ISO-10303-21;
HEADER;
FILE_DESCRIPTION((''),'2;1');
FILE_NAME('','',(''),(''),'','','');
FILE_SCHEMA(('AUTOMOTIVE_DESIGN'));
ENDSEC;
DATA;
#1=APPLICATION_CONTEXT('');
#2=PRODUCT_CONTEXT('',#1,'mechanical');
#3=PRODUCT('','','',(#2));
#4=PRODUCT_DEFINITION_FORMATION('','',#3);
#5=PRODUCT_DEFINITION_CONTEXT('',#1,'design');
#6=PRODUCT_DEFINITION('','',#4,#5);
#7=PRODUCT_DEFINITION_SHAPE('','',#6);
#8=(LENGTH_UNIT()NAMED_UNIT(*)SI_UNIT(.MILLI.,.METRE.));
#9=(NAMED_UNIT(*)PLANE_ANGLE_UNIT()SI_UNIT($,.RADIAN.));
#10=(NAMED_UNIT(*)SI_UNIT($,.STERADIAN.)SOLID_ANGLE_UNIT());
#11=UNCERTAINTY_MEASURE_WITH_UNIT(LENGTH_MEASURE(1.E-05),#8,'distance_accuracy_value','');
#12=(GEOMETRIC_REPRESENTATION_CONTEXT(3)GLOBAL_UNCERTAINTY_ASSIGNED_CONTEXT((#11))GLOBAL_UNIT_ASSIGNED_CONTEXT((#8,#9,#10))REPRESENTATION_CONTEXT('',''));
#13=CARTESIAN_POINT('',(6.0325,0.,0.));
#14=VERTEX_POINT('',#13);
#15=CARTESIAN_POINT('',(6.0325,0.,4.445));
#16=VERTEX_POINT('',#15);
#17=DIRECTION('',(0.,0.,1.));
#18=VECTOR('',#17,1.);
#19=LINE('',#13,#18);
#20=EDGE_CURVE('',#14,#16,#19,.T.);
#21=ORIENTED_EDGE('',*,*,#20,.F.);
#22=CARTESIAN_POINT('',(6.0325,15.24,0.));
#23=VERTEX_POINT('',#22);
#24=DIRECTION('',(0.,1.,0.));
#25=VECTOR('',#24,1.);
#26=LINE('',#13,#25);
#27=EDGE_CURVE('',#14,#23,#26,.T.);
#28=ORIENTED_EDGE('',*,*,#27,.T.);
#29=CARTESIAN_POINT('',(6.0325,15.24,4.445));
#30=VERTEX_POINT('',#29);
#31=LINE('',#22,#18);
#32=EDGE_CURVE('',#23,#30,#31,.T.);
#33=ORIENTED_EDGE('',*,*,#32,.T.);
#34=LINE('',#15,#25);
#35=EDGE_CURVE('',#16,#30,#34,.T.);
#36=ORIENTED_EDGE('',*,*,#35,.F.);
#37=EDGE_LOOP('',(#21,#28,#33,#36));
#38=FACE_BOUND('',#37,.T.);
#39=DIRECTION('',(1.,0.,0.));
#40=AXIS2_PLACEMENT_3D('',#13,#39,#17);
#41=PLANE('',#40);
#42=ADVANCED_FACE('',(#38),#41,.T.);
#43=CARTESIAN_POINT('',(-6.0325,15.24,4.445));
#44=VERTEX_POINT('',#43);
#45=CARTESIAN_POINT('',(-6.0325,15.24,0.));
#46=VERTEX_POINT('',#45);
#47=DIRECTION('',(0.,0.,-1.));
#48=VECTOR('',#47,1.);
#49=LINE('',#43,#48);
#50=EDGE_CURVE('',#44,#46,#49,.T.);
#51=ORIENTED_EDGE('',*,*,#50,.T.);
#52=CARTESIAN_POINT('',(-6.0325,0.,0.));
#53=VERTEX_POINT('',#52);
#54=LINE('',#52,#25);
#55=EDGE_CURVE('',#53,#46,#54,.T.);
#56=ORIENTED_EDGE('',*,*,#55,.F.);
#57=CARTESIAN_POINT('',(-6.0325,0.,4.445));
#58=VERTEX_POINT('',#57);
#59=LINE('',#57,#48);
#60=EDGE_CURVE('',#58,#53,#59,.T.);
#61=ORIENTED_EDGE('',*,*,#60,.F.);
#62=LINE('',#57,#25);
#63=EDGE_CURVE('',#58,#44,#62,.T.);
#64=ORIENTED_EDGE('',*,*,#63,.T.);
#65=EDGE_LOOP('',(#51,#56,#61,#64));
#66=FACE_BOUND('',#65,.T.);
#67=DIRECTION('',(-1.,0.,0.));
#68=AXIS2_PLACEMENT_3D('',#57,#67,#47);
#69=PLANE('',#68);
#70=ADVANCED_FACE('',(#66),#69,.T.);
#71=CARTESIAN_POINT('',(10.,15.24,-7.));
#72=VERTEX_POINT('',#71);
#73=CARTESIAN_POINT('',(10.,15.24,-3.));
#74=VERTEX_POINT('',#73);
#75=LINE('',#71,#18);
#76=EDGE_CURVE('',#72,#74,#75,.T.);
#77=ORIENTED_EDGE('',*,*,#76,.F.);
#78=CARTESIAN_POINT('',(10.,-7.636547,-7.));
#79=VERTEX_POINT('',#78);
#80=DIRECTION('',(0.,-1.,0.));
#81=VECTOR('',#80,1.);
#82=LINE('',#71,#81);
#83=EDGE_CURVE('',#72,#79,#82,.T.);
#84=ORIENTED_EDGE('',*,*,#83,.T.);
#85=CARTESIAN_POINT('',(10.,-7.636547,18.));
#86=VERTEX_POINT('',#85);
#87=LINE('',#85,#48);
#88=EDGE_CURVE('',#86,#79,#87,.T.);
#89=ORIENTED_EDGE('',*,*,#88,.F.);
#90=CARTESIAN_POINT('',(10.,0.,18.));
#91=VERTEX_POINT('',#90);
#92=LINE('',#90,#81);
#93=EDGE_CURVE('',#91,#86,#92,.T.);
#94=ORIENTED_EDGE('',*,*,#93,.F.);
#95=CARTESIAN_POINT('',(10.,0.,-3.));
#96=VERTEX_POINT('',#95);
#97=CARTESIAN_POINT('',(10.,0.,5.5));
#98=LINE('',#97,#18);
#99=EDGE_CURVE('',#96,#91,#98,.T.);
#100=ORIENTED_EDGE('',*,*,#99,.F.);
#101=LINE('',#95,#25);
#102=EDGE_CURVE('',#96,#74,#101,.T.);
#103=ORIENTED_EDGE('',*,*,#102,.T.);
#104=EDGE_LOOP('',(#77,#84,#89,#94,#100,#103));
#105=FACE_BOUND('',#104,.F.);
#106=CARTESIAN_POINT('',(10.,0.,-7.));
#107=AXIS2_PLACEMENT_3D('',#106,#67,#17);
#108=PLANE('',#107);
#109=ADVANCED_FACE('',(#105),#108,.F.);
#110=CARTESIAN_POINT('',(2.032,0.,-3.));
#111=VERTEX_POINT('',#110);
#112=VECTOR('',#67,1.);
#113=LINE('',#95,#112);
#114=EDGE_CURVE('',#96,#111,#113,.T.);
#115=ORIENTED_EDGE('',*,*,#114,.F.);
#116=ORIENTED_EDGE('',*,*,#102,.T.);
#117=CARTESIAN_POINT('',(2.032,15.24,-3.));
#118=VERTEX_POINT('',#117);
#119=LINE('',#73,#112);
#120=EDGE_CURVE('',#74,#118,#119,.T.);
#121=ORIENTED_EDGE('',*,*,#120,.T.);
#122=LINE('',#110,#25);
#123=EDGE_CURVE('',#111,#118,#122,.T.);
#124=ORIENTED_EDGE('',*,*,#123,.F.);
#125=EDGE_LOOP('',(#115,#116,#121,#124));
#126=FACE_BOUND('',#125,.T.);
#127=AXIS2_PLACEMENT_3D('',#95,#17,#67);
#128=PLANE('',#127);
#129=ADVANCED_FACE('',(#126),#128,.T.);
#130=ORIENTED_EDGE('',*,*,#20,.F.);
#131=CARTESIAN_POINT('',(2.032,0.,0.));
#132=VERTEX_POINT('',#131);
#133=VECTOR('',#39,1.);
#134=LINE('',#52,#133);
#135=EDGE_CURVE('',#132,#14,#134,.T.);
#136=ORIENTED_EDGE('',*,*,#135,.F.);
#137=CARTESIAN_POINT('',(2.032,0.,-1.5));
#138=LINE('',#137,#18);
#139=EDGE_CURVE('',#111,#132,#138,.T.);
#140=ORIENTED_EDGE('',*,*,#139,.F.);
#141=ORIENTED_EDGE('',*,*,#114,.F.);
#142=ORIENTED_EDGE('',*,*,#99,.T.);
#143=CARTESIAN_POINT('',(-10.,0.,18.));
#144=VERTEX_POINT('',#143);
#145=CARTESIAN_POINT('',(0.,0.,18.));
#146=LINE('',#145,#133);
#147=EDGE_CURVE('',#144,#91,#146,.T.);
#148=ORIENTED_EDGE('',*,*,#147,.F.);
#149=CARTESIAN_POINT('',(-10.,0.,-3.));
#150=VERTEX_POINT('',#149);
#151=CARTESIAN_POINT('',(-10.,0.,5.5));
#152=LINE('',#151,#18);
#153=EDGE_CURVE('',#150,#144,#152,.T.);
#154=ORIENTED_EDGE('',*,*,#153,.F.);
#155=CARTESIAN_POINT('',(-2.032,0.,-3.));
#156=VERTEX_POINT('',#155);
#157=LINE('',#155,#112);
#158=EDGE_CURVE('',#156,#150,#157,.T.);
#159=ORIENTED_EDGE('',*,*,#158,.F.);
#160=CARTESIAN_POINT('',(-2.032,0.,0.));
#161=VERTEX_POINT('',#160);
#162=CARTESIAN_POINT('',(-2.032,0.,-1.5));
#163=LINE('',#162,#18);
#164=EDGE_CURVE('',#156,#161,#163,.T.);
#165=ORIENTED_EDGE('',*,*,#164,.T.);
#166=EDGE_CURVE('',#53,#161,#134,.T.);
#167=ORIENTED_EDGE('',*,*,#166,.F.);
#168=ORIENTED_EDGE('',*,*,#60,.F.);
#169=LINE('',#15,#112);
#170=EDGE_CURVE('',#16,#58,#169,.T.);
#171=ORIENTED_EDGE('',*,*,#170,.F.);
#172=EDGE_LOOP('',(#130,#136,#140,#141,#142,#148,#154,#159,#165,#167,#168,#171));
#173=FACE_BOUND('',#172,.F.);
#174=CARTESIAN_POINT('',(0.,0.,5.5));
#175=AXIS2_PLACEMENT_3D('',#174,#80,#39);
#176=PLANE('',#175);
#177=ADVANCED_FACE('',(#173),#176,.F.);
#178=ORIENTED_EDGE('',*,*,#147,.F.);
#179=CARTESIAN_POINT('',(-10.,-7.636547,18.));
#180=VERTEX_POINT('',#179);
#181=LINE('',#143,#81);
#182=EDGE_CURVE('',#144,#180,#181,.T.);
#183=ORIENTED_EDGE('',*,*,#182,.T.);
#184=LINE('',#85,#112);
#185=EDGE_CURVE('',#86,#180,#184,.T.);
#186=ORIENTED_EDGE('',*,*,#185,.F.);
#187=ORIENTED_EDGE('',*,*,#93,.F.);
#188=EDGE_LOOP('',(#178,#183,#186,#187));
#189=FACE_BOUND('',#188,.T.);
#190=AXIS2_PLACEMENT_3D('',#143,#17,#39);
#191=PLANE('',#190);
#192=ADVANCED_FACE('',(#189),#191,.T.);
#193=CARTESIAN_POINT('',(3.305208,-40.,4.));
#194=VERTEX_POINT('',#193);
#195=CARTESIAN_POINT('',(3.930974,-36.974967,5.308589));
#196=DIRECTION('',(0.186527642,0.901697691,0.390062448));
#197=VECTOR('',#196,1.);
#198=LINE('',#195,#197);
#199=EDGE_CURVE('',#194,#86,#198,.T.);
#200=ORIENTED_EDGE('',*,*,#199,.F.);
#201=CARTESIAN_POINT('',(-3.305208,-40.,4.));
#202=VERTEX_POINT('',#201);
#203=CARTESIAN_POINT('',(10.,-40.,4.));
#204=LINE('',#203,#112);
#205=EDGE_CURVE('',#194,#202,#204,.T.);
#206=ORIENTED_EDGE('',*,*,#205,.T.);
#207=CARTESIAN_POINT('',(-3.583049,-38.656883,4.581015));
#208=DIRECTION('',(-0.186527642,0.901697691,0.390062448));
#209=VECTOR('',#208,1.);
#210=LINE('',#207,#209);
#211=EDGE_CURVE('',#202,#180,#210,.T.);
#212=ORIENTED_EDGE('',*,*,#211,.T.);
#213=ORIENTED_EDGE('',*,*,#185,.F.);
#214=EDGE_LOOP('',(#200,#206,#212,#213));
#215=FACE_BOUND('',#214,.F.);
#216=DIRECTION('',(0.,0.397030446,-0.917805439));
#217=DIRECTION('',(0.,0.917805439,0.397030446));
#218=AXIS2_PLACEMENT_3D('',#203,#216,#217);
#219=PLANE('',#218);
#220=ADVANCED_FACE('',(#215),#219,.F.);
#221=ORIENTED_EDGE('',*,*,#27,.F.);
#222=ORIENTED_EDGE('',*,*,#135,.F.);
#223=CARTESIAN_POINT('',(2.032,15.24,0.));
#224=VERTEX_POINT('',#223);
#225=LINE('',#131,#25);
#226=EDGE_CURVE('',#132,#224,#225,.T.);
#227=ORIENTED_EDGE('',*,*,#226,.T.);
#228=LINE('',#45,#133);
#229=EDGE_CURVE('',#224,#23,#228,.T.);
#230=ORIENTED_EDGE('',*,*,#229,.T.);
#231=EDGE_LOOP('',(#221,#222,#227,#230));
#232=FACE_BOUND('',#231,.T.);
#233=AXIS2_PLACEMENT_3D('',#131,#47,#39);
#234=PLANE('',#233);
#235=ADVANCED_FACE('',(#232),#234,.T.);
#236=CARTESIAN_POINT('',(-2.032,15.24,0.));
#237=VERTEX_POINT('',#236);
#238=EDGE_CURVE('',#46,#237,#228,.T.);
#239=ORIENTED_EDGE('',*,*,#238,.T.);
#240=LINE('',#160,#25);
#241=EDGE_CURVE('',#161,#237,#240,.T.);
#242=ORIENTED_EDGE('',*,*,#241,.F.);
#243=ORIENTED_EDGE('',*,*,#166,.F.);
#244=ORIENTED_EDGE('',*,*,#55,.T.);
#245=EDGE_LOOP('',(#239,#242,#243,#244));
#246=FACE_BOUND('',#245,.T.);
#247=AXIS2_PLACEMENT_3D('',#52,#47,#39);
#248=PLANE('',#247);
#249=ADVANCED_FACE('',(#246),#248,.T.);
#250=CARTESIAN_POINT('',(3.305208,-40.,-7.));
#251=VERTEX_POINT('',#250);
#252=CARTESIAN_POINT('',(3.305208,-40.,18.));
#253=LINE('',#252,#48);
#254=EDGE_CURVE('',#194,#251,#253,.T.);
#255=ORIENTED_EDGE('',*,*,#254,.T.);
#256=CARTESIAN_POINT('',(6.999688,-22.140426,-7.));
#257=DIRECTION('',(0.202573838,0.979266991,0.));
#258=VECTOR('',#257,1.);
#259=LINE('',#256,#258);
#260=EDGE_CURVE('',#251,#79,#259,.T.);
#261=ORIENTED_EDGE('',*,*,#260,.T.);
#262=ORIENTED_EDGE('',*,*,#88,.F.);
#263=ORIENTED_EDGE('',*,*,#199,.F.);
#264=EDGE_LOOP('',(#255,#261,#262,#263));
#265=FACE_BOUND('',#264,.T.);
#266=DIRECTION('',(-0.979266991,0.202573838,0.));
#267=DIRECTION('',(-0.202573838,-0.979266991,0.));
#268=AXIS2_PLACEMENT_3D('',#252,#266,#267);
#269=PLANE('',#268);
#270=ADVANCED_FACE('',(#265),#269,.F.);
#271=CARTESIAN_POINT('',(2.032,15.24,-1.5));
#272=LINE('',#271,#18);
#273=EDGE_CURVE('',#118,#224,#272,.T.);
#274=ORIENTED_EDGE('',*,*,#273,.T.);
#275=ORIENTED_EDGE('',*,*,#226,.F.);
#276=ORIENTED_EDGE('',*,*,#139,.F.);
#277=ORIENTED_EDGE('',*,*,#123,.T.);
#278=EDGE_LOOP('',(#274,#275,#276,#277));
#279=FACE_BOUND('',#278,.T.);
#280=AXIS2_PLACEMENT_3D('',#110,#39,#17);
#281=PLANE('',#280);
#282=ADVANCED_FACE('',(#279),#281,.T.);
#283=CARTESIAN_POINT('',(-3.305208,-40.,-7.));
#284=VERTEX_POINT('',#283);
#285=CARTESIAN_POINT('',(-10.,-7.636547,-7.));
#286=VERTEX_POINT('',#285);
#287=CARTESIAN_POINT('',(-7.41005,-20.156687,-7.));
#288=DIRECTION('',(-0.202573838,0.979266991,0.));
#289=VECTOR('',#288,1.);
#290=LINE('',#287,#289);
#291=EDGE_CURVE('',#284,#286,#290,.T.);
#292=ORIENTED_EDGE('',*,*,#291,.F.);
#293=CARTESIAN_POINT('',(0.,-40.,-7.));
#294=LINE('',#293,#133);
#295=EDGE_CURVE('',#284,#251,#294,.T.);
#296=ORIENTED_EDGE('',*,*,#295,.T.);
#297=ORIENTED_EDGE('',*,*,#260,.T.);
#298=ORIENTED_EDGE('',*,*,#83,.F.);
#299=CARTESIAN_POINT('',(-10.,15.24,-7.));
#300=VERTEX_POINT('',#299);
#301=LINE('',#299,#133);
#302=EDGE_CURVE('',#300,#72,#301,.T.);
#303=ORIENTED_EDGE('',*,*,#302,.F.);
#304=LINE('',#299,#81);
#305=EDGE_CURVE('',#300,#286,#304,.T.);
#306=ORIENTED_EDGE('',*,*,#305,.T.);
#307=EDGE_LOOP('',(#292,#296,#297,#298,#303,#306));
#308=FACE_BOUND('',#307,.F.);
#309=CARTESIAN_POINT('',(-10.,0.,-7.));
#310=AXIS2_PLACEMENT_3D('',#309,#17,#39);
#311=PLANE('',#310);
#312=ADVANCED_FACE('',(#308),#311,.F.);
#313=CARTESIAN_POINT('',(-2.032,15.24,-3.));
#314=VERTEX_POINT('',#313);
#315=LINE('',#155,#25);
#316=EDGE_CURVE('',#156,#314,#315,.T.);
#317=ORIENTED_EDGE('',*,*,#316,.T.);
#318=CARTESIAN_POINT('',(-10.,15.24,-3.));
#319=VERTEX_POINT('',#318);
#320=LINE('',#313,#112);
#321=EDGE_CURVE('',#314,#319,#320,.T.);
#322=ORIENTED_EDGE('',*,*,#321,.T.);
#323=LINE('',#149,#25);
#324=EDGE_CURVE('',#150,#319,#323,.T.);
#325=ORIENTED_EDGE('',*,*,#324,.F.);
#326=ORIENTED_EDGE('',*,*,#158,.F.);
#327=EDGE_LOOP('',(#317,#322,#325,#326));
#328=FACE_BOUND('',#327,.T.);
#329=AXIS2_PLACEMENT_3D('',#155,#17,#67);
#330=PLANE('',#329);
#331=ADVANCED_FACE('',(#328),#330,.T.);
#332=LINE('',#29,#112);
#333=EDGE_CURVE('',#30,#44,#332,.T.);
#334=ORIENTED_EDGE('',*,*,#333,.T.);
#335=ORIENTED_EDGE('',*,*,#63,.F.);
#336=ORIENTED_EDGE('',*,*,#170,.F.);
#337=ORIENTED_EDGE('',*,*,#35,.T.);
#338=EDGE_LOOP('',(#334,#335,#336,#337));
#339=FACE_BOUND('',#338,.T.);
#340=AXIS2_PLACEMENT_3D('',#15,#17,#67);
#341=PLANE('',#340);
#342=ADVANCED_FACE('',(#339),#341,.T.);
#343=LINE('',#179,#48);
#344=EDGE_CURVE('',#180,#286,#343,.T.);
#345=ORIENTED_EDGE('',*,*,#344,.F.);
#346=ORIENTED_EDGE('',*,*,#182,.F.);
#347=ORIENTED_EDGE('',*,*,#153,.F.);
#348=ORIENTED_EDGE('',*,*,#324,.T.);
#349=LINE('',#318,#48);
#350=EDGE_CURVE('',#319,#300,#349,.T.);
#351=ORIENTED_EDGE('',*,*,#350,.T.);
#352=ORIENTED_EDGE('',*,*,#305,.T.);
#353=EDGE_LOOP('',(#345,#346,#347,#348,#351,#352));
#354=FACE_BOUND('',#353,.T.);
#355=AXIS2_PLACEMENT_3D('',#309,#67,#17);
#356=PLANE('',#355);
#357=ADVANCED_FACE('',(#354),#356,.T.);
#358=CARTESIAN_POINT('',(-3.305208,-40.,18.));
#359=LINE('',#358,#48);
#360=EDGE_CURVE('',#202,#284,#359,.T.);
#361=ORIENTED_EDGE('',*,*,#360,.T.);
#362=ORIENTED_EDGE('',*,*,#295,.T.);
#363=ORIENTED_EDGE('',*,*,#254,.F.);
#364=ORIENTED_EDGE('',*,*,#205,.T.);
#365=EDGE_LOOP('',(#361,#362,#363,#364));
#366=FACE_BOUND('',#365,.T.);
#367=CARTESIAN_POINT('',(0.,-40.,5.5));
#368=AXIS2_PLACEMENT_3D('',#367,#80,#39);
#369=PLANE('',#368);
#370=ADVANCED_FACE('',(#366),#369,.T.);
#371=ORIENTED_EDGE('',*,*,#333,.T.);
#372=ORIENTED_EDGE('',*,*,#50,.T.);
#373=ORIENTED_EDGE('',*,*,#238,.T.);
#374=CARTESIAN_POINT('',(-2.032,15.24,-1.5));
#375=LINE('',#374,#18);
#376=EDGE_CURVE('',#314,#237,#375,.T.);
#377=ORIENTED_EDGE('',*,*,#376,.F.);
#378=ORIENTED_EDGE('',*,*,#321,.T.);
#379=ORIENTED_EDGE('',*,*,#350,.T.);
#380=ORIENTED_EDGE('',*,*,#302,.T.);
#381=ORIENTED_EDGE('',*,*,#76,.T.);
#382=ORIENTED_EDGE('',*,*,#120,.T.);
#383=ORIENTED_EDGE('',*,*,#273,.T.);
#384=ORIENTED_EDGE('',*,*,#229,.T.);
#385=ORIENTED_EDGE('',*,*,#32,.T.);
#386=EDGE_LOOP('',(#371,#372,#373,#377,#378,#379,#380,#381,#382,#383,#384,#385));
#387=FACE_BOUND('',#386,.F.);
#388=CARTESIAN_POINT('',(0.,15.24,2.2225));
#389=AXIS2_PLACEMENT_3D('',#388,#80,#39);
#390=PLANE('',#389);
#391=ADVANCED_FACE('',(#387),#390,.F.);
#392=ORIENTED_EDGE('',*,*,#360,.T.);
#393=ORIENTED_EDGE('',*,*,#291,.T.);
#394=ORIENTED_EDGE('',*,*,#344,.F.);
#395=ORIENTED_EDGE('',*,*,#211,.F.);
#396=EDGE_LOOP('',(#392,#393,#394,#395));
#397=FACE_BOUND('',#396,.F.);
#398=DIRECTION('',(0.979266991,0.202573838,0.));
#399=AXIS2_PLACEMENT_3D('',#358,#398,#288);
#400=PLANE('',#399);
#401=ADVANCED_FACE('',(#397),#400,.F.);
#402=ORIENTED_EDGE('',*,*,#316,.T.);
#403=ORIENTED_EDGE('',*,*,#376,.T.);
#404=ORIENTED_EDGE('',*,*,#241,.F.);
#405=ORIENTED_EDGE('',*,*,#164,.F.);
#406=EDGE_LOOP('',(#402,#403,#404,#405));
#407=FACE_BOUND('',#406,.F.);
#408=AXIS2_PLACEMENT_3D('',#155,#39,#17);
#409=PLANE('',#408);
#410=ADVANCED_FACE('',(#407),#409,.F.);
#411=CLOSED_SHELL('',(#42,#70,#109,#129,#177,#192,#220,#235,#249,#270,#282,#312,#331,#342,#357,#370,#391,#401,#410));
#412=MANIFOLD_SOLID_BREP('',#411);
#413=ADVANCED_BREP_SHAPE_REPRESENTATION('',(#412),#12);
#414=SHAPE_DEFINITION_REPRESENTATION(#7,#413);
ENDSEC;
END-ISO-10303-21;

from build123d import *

# Parameters (mm, degrees)
F0_W     = 4.064
F0_H     = 3
F1_DEPTH = 15.24
F2_W     = 20
F2_H     = 25
F3_DEPTH = 40
F5_DEPTH = 25.001
F7_DEPTH = 20.001


# Not quite as in the source:
# - a pattern or mirror of a feature is missing from the dataset's text; its kind, count and spacing are read off the source's solid


with BuildPart() as f1:
    # F0 (on Front) → F1 (new body)
    with BuildSketch(Plane.XZ):
        Polygon((6.0325, 4.445), (-6.0325, 4.445), (-6.0325, 0), (-2.032, 0), (2.032, 0), (6.0325, 0), align=None)
        with Locations((0, -1.5)):
            Rectangle(F0_W, F0_H)
        Polygon((2.032, -3), (-2.032, -3), (-10, -3), (-10, -7), (10, -7), (10, -3), align=None)
    extrude(amount=-F1_DEPTH)

    # F2 (on face) → F3 (join)
    with BuildSketch(Plane.XZ):
        with Locations((0, 5.5)):
            Rectangle(F2_W, F2_H)
    extrude(amount=F3_DEPTH)

    # F4 (on face) → F5 (cut, through all)
    with BuildSketch(Plane.XY.offset(18)):
        Polygon((-3.305207938, -40), (-10, -7.6365470886), (-10, -40), align=None)
    f5 = extrude(amount=-F5_DEPTH, mode=Mode.SUBTRACT)

    # F5_copies: F5 across plane
    add(f5.mirror(Plane(origin=(0, 0, 0), x_dir=(0, 0, 1), z_dir=(1, 0, 0))), mode=Mode.SUBTRACT)

    # F6 (on face) → F7 (cut, through all)
    with BuildSketch(Plane.YZ.offset(10)):
        Polygon((-40, 18), (-40, 4), (-7.6365470886, 18), align=None)
    extrude(amount=-F7_DEPTH, mode=Mode.SUBTRACT)


solid = f1.part
